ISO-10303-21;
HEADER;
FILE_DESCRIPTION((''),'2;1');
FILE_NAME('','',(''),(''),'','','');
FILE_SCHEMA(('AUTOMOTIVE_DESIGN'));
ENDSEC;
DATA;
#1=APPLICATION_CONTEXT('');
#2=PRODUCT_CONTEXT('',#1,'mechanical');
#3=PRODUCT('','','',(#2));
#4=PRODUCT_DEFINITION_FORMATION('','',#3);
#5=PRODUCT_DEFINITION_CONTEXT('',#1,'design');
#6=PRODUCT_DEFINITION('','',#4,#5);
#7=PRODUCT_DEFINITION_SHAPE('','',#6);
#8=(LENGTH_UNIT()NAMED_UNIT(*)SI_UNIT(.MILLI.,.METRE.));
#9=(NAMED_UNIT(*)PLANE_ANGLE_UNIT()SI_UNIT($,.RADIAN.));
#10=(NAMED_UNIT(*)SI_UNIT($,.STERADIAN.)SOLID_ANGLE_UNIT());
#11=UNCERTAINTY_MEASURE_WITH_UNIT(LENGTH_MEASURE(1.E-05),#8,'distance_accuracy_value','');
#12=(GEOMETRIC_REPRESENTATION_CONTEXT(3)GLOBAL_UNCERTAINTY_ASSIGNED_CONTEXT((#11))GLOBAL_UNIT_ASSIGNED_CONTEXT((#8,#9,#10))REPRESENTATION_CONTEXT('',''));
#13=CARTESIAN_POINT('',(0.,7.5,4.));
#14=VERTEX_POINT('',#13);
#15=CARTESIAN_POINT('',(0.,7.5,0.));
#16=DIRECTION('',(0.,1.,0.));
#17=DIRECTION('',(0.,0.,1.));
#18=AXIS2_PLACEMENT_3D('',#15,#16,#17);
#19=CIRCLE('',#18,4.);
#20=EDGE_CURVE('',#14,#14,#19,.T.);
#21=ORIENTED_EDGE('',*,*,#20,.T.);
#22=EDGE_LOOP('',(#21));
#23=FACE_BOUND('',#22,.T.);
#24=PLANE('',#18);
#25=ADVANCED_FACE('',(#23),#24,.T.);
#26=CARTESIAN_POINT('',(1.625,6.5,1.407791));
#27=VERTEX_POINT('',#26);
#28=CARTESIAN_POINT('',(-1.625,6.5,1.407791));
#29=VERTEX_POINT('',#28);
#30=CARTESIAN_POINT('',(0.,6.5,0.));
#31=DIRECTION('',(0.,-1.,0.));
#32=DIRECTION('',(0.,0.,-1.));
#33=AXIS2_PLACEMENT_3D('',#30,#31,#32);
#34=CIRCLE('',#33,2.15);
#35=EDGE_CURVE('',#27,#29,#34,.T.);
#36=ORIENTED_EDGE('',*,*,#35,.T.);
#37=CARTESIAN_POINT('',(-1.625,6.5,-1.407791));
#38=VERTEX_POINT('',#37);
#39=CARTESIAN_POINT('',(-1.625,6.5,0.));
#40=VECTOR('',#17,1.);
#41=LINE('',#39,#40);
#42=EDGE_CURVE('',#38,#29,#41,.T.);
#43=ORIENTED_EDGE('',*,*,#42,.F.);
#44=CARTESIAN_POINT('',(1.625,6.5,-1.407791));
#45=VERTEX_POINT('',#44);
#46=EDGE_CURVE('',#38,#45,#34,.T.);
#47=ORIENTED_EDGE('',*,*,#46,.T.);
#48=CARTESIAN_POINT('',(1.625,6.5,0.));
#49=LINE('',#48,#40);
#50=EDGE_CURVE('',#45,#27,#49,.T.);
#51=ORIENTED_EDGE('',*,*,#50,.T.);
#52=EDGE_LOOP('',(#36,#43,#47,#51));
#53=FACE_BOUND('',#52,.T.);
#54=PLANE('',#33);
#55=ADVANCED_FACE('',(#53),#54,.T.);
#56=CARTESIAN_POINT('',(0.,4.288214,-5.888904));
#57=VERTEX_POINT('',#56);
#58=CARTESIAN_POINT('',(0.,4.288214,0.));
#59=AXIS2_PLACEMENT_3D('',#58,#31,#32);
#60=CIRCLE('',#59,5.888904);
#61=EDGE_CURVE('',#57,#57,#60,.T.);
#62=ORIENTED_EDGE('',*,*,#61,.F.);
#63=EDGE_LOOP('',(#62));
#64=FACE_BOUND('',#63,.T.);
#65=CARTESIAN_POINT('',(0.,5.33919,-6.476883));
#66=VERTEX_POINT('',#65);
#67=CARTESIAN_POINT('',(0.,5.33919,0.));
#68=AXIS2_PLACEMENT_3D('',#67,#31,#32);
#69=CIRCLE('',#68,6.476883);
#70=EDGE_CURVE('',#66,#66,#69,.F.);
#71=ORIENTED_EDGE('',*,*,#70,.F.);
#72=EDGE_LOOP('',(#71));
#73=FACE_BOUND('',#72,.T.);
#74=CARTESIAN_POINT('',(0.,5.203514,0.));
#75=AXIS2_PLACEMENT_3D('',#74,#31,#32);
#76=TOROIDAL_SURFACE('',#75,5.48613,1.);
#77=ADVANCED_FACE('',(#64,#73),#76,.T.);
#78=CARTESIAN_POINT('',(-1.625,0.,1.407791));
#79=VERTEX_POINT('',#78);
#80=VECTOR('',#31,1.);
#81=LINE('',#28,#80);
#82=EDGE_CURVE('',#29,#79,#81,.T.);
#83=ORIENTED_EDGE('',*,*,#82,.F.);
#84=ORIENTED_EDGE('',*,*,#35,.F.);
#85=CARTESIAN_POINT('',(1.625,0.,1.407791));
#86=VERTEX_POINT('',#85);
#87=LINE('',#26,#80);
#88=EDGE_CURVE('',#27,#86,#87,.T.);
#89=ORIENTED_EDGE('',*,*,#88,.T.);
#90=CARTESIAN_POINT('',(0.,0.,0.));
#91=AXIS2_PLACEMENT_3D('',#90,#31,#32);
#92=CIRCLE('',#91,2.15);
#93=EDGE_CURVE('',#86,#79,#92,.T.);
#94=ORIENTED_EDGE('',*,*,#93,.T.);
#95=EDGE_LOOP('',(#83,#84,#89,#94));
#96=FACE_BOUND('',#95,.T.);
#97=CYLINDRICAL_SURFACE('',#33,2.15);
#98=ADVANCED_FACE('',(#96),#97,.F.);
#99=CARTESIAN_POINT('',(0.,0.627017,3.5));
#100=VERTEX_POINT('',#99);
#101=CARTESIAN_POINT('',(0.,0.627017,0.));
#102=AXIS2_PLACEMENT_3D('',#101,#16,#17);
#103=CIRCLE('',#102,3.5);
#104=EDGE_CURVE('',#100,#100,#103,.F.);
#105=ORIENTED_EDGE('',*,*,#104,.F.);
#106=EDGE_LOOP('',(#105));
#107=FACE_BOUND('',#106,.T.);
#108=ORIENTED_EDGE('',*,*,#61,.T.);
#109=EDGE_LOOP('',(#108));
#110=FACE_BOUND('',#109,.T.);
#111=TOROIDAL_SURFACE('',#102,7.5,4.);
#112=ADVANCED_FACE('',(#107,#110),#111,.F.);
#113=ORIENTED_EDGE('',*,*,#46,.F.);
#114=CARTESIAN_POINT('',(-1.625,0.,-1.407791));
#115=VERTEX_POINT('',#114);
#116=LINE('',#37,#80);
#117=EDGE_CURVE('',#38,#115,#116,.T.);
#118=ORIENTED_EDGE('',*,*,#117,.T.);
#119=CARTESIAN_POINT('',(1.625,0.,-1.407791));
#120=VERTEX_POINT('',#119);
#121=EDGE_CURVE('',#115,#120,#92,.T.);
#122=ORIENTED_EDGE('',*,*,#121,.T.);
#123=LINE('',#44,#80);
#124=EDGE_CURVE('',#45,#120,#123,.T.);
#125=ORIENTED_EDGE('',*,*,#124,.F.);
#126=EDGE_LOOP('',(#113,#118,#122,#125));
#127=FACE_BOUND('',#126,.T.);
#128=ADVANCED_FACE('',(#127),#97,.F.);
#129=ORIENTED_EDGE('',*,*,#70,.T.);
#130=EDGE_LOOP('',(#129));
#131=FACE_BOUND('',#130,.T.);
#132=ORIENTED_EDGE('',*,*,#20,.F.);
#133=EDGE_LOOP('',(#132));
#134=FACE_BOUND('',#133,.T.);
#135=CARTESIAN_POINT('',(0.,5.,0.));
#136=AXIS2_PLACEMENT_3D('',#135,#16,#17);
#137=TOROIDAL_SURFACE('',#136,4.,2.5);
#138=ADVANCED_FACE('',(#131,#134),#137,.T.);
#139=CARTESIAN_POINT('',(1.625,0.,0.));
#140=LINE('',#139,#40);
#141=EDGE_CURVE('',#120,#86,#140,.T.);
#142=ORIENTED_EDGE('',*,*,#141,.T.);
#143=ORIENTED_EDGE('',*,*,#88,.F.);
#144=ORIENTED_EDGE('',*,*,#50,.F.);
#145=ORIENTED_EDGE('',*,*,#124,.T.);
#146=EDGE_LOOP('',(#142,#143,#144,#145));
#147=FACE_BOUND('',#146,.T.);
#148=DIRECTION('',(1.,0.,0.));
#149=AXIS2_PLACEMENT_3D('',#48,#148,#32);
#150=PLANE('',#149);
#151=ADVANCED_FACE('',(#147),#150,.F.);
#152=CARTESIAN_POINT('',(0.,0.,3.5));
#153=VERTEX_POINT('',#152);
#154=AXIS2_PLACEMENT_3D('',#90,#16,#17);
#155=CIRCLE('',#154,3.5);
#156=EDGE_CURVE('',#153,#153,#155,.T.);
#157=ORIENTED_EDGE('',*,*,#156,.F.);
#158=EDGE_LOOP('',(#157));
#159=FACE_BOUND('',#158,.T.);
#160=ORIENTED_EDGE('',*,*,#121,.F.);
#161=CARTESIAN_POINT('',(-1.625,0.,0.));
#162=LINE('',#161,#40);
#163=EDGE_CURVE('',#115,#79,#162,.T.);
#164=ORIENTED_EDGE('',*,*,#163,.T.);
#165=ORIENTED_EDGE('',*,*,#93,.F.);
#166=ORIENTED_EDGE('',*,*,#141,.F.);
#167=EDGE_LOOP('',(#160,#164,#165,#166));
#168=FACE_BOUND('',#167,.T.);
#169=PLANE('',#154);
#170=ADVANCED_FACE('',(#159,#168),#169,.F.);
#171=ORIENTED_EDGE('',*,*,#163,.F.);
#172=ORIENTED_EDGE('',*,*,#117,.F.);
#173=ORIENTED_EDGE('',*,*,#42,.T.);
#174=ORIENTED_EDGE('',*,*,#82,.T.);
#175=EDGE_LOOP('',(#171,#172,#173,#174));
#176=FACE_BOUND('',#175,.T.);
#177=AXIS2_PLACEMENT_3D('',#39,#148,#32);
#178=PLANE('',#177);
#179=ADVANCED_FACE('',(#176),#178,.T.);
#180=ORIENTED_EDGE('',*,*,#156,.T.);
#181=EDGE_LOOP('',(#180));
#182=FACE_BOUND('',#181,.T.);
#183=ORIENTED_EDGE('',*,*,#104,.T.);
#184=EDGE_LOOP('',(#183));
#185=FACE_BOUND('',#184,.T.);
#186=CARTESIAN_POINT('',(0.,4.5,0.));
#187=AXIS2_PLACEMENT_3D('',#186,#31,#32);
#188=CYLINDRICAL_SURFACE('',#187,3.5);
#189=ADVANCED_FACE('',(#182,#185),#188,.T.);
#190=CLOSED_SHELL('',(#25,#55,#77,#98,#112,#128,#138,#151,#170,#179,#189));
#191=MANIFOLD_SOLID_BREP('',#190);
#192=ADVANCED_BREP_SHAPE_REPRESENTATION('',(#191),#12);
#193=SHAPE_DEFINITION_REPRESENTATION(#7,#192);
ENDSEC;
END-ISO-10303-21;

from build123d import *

# Parameters (mm, degrees)
SKETCH_1_R          = 3.5
EXTRUDE_1_DEPTH     = 4.5
SKETCH_2_R          = 6.5
EXTRUDE_2_DEPTH     = 3
FILLET_1_R          = 2.5
FILLET_2_R          = 4
SKETCH_3_W          = 3.25
SKETCH_3_H          = 2.815581646
CUT_EXTRUDE_1_DEPTH = 6.5
FILLET_3_R          = 1


with BuildPart() as part:
    # 草图1 → 凸台-拉伸1 (new body)
    with BuildSketch(Plane(origin=(0, 0, 0), x_dir=(1, 0, 0), z_dir=(0, 1, 0))):
        with Locations(Location((0, 0, 0), (0, 0, 270))):
            Circle(SKETCH_1_R)
    extrude(amount=EXTRUDE_1_DEPTH)

    # 草图2 → 凸台-拉伸2 (add)
    with BuildSketch(Plane(origin=(0, 4.5, 0), x_dir=(1, 0, 0), z_dir=(0, 1, 0))):
        with Locations(Location((0, 0, 0), (0, 0, 270))):
            Circle(SKETCH_2_R)
    extrude(amount=EXTRUDE_2_DEPTH)

    # 圆角1
    fillet_1_edges = [part.edges().sort_by_distance(p)[0] for p in [
        (0, 7.5, -6.5),
    ]]
    fillet(fillet_1_edges, radius=FILLET_1_R)

    # 圆角2
    # the kernel refuses this fillet: 4 mm, written as the material it adds along each edge
    with BuildSketch(Plane(origin=(0, 4.5, 0), x_dir=(0, 0, 1), z_dir=(-1, 0, 0))) as fillet_2_piece_1:
        with BuildLine():
            CenterArc((7.5, -3.872983346), FILLET_2_R, 104.477512186, 75.522487814)
            Line((3.5, -3.872983346), (3.42, -3.872983346))
            Line((3.42, -3.872983346), (3.42, 0))
            Line((3.42, 0), (3.5, 0.08))
            ThreePointArc((3.5, 0.08), (5, 0.08), (6.48, 0.077459667))
            Line((6.48, 0.077459667), (6.5, 0))
        make_face()
    revolve(axis=Axis((0, 4.5, 0), (0, 1, 0)))

    # 草图3 → 切除-拉伸1 (cut)
    with BuildSketch(Plane.XZ):
        with BuildLine():
            ThreePointArc((1.625, 1.407790823), (0, 2.15), (-1.625, 1.407790823))
            Line((-1.625, 1.407790823), (1.625, 1.407790823))
        make_face()
        Rectangle(SKETCH_3_W, SKETCH_3_H)
        with BuildLine():
            Line((1.625, -1.407790823), (-1.625, -1.407790823))
            ThreePointArc((-1.625, -1.407790823), (0, -2.15), (1.625, -1.407790823))
        make_face()
    extrude(amount=-CUT_EXTRUDE_1_DEPTH, mode=Mode.SUBTRACT)

    # 圆角3
    fillet_3_edges = [part.edges().sort_by_distance(p)[0] for p in [
        (0, 4.5, -6.5),
    ]]
    fillet(fillet_3_edges, radius=FILLET_3_R)


solid = part.part
